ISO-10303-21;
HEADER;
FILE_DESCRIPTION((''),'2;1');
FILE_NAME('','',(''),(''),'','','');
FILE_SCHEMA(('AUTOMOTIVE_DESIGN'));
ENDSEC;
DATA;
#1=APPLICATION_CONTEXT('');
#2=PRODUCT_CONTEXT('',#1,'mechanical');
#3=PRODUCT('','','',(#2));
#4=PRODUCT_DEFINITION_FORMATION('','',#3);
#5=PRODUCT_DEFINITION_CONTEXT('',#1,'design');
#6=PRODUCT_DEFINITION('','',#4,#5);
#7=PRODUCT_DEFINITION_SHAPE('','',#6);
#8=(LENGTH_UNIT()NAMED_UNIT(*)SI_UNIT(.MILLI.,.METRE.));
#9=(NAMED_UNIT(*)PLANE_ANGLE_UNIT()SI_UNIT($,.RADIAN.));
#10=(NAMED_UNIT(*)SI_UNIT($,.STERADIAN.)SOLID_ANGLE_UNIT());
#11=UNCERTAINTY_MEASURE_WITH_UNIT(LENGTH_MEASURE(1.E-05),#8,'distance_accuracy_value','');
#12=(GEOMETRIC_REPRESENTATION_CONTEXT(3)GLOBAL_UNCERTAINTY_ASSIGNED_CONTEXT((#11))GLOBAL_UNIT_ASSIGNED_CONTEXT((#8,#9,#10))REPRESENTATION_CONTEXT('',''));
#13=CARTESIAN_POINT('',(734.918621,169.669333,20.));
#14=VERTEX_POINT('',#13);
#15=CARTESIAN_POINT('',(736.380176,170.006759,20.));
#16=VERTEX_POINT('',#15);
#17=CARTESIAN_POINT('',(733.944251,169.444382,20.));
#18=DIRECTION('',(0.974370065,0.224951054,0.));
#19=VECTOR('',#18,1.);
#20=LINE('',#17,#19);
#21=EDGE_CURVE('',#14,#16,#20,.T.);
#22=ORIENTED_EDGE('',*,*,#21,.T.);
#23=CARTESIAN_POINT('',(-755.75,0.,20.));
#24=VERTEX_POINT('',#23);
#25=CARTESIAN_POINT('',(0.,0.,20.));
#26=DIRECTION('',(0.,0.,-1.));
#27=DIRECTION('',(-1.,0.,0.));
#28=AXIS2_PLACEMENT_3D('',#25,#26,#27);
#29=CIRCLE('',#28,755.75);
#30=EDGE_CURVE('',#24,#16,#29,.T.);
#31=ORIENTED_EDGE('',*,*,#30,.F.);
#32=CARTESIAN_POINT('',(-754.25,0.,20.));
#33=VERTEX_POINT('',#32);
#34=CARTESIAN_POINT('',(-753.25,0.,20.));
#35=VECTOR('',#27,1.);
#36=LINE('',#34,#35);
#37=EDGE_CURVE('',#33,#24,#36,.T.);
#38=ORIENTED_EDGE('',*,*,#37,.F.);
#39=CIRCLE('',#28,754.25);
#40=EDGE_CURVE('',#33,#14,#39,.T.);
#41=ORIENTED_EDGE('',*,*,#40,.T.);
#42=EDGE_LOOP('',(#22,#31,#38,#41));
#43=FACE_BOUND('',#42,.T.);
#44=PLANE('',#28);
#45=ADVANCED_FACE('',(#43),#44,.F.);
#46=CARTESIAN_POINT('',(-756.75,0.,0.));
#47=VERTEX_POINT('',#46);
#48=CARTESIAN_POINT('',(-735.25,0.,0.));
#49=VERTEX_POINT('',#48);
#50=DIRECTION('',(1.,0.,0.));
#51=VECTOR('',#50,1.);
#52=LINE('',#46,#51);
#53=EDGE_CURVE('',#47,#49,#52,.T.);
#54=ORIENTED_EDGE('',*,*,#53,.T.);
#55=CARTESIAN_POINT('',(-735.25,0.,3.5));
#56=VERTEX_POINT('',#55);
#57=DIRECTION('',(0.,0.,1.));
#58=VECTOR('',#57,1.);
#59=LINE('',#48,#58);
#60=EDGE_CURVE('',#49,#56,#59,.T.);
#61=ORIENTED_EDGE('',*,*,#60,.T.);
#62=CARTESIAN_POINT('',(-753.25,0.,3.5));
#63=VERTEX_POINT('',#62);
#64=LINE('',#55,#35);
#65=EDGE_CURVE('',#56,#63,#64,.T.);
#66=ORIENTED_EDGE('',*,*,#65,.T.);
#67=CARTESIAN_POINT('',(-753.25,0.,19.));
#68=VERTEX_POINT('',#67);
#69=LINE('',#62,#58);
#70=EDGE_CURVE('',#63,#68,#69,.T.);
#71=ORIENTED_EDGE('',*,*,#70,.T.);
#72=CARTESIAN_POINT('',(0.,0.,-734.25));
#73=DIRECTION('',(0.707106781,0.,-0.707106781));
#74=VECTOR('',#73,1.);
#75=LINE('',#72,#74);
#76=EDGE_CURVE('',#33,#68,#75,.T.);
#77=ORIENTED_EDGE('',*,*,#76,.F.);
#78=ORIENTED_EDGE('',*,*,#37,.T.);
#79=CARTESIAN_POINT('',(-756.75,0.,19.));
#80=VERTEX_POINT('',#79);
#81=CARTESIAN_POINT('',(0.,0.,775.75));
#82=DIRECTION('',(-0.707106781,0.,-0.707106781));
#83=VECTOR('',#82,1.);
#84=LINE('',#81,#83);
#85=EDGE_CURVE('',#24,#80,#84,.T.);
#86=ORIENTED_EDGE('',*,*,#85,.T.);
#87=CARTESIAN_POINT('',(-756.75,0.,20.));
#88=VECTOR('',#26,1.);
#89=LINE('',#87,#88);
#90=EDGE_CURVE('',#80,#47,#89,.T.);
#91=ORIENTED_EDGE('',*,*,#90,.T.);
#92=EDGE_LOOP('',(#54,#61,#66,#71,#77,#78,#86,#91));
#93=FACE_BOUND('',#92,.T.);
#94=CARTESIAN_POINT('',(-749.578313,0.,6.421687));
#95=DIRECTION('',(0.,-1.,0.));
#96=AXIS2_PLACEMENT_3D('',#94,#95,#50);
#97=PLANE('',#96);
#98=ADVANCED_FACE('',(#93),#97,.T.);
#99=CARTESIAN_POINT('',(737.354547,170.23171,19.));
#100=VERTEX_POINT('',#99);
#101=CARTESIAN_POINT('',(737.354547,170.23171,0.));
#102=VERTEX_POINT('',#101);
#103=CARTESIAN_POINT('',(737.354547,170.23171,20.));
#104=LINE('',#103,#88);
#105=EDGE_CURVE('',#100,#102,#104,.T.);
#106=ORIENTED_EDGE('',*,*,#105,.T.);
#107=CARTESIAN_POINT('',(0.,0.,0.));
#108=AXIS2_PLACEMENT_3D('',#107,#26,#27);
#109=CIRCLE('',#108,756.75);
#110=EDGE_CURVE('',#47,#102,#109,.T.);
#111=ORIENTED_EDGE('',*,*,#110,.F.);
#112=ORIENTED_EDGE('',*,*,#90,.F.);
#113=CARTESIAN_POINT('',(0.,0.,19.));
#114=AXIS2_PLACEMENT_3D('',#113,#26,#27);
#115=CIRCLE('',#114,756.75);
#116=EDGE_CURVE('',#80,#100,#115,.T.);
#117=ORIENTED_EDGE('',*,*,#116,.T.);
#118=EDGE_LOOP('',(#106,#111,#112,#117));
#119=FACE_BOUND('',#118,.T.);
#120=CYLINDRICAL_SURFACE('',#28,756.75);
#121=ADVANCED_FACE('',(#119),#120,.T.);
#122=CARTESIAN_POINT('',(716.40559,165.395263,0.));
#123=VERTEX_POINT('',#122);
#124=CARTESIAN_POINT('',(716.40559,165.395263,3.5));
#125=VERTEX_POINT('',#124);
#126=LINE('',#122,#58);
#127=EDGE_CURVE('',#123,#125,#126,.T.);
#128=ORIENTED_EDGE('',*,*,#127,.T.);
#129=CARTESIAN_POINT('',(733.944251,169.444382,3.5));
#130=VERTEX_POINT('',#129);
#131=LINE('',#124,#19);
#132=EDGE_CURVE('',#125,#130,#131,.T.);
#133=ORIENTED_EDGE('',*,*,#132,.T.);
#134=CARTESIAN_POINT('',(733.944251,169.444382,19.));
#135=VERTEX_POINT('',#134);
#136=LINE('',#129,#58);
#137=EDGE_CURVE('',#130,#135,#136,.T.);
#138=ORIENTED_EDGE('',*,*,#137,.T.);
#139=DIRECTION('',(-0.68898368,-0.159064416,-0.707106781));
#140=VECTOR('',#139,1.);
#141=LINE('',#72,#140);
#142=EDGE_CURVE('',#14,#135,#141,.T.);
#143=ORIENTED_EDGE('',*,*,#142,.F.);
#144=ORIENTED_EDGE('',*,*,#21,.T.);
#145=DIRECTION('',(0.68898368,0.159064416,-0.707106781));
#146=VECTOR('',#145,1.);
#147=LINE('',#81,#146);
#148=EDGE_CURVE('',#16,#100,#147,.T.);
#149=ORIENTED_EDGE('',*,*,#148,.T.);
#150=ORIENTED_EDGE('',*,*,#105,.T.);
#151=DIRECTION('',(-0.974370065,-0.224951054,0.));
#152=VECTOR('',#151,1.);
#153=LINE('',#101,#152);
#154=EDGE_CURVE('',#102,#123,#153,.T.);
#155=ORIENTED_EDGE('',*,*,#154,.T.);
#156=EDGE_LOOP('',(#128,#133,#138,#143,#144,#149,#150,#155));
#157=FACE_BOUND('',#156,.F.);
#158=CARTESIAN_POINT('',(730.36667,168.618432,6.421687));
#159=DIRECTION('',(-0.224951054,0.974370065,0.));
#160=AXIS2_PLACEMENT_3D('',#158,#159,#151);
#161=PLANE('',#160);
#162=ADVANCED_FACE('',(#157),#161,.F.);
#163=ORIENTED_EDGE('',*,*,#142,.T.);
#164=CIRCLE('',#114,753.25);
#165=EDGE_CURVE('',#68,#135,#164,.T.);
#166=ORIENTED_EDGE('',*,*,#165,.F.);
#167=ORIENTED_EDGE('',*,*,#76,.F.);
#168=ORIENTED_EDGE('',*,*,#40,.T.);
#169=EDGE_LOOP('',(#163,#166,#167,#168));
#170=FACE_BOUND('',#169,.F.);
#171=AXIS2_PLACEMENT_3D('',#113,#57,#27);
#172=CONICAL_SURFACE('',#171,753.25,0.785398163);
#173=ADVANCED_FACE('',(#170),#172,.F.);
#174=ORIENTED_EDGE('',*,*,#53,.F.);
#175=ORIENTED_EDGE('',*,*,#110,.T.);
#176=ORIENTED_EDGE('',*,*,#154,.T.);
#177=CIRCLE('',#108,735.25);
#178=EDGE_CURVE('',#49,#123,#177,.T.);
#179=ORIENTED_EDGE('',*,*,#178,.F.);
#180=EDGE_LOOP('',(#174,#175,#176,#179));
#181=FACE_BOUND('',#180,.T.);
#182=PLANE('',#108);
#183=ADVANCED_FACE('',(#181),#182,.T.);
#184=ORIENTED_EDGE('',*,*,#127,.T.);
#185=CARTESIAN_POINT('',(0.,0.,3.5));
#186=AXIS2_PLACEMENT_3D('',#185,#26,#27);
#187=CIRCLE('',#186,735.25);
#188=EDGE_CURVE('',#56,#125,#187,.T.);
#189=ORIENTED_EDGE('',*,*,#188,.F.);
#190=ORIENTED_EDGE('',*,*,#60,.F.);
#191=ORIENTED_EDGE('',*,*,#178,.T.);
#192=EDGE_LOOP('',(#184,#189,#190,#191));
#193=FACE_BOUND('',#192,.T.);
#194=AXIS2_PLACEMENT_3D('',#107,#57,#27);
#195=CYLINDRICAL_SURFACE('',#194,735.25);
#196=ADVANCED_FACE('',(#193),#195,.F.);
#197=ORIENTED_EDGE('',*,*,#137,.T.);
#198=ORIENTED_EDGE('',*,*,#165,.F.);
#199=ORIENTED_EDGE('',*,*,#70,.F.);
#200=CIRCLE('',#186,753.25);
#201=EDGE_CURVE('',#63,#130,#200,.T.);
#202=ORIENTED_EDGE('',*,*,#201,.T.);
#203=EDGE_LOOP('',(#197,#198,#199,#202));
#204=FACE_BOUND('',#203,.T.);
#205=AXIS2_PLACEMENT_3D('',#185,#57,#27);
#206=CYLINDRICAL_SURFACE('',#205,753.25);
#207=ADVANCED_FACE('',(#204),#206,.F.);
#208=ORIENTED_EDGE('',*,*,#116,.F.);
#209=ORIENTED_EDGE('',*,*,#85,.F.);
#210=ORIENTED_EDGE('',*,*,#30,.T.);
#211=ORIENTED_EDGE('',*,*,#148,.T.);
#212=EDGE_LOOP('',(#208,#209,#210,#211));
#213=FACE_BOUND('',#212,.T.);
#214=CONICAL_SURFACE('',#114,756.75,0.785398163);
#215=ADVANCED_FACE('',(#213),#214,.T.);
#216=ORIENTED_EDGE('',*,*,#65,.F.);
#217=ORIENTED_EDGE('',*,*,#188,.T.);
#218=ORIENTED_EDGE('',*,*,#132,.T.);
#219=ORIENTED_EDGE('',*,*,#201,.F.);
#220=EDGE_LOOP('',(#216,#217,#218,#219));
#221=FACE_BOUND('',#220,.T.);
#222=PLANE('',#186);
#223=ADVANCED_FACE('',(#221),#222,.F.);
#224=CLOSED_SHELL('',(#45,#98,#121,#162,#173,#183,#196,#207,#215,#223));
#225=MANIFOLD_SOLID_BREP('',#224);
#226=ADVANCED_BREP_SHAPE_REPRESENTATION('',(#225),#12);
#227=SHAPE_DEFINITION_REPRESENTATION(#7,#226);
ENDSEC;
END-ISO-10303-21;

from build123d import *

# Parameters (mm, degrees)
F3_ANGLE = 167
F4_SIZE  = 1


# Not quite as in the source:
# - a feature names something its author has since deleted; it is built from what else it names


with BuildPart() as f3:
    # F2 (on Front) → F3 (revolve)
    with BuildSketch(Plane.XZ):
        Polygon((-753.25, 20), (-756.75, 20), (-756.75, 0), (-735.25, 0), (-735.25, 3.5), (-753.25, 3.5), align=None)
    revolve(axis=Axis((0, 0, 7.6849460602), (0, 0, -1)), revolution_arc=F3_ANGLE)

    # F4
    f4_edges = [f3.edges().sort_by_distance(p)[0] for p in [
        (-85.666532, 751.885502, 20),
        (-85.270321, 748.408, 20),
    ]]
    chamfer(f4_edges, length=F4_SIZE)


solid = f3.part
